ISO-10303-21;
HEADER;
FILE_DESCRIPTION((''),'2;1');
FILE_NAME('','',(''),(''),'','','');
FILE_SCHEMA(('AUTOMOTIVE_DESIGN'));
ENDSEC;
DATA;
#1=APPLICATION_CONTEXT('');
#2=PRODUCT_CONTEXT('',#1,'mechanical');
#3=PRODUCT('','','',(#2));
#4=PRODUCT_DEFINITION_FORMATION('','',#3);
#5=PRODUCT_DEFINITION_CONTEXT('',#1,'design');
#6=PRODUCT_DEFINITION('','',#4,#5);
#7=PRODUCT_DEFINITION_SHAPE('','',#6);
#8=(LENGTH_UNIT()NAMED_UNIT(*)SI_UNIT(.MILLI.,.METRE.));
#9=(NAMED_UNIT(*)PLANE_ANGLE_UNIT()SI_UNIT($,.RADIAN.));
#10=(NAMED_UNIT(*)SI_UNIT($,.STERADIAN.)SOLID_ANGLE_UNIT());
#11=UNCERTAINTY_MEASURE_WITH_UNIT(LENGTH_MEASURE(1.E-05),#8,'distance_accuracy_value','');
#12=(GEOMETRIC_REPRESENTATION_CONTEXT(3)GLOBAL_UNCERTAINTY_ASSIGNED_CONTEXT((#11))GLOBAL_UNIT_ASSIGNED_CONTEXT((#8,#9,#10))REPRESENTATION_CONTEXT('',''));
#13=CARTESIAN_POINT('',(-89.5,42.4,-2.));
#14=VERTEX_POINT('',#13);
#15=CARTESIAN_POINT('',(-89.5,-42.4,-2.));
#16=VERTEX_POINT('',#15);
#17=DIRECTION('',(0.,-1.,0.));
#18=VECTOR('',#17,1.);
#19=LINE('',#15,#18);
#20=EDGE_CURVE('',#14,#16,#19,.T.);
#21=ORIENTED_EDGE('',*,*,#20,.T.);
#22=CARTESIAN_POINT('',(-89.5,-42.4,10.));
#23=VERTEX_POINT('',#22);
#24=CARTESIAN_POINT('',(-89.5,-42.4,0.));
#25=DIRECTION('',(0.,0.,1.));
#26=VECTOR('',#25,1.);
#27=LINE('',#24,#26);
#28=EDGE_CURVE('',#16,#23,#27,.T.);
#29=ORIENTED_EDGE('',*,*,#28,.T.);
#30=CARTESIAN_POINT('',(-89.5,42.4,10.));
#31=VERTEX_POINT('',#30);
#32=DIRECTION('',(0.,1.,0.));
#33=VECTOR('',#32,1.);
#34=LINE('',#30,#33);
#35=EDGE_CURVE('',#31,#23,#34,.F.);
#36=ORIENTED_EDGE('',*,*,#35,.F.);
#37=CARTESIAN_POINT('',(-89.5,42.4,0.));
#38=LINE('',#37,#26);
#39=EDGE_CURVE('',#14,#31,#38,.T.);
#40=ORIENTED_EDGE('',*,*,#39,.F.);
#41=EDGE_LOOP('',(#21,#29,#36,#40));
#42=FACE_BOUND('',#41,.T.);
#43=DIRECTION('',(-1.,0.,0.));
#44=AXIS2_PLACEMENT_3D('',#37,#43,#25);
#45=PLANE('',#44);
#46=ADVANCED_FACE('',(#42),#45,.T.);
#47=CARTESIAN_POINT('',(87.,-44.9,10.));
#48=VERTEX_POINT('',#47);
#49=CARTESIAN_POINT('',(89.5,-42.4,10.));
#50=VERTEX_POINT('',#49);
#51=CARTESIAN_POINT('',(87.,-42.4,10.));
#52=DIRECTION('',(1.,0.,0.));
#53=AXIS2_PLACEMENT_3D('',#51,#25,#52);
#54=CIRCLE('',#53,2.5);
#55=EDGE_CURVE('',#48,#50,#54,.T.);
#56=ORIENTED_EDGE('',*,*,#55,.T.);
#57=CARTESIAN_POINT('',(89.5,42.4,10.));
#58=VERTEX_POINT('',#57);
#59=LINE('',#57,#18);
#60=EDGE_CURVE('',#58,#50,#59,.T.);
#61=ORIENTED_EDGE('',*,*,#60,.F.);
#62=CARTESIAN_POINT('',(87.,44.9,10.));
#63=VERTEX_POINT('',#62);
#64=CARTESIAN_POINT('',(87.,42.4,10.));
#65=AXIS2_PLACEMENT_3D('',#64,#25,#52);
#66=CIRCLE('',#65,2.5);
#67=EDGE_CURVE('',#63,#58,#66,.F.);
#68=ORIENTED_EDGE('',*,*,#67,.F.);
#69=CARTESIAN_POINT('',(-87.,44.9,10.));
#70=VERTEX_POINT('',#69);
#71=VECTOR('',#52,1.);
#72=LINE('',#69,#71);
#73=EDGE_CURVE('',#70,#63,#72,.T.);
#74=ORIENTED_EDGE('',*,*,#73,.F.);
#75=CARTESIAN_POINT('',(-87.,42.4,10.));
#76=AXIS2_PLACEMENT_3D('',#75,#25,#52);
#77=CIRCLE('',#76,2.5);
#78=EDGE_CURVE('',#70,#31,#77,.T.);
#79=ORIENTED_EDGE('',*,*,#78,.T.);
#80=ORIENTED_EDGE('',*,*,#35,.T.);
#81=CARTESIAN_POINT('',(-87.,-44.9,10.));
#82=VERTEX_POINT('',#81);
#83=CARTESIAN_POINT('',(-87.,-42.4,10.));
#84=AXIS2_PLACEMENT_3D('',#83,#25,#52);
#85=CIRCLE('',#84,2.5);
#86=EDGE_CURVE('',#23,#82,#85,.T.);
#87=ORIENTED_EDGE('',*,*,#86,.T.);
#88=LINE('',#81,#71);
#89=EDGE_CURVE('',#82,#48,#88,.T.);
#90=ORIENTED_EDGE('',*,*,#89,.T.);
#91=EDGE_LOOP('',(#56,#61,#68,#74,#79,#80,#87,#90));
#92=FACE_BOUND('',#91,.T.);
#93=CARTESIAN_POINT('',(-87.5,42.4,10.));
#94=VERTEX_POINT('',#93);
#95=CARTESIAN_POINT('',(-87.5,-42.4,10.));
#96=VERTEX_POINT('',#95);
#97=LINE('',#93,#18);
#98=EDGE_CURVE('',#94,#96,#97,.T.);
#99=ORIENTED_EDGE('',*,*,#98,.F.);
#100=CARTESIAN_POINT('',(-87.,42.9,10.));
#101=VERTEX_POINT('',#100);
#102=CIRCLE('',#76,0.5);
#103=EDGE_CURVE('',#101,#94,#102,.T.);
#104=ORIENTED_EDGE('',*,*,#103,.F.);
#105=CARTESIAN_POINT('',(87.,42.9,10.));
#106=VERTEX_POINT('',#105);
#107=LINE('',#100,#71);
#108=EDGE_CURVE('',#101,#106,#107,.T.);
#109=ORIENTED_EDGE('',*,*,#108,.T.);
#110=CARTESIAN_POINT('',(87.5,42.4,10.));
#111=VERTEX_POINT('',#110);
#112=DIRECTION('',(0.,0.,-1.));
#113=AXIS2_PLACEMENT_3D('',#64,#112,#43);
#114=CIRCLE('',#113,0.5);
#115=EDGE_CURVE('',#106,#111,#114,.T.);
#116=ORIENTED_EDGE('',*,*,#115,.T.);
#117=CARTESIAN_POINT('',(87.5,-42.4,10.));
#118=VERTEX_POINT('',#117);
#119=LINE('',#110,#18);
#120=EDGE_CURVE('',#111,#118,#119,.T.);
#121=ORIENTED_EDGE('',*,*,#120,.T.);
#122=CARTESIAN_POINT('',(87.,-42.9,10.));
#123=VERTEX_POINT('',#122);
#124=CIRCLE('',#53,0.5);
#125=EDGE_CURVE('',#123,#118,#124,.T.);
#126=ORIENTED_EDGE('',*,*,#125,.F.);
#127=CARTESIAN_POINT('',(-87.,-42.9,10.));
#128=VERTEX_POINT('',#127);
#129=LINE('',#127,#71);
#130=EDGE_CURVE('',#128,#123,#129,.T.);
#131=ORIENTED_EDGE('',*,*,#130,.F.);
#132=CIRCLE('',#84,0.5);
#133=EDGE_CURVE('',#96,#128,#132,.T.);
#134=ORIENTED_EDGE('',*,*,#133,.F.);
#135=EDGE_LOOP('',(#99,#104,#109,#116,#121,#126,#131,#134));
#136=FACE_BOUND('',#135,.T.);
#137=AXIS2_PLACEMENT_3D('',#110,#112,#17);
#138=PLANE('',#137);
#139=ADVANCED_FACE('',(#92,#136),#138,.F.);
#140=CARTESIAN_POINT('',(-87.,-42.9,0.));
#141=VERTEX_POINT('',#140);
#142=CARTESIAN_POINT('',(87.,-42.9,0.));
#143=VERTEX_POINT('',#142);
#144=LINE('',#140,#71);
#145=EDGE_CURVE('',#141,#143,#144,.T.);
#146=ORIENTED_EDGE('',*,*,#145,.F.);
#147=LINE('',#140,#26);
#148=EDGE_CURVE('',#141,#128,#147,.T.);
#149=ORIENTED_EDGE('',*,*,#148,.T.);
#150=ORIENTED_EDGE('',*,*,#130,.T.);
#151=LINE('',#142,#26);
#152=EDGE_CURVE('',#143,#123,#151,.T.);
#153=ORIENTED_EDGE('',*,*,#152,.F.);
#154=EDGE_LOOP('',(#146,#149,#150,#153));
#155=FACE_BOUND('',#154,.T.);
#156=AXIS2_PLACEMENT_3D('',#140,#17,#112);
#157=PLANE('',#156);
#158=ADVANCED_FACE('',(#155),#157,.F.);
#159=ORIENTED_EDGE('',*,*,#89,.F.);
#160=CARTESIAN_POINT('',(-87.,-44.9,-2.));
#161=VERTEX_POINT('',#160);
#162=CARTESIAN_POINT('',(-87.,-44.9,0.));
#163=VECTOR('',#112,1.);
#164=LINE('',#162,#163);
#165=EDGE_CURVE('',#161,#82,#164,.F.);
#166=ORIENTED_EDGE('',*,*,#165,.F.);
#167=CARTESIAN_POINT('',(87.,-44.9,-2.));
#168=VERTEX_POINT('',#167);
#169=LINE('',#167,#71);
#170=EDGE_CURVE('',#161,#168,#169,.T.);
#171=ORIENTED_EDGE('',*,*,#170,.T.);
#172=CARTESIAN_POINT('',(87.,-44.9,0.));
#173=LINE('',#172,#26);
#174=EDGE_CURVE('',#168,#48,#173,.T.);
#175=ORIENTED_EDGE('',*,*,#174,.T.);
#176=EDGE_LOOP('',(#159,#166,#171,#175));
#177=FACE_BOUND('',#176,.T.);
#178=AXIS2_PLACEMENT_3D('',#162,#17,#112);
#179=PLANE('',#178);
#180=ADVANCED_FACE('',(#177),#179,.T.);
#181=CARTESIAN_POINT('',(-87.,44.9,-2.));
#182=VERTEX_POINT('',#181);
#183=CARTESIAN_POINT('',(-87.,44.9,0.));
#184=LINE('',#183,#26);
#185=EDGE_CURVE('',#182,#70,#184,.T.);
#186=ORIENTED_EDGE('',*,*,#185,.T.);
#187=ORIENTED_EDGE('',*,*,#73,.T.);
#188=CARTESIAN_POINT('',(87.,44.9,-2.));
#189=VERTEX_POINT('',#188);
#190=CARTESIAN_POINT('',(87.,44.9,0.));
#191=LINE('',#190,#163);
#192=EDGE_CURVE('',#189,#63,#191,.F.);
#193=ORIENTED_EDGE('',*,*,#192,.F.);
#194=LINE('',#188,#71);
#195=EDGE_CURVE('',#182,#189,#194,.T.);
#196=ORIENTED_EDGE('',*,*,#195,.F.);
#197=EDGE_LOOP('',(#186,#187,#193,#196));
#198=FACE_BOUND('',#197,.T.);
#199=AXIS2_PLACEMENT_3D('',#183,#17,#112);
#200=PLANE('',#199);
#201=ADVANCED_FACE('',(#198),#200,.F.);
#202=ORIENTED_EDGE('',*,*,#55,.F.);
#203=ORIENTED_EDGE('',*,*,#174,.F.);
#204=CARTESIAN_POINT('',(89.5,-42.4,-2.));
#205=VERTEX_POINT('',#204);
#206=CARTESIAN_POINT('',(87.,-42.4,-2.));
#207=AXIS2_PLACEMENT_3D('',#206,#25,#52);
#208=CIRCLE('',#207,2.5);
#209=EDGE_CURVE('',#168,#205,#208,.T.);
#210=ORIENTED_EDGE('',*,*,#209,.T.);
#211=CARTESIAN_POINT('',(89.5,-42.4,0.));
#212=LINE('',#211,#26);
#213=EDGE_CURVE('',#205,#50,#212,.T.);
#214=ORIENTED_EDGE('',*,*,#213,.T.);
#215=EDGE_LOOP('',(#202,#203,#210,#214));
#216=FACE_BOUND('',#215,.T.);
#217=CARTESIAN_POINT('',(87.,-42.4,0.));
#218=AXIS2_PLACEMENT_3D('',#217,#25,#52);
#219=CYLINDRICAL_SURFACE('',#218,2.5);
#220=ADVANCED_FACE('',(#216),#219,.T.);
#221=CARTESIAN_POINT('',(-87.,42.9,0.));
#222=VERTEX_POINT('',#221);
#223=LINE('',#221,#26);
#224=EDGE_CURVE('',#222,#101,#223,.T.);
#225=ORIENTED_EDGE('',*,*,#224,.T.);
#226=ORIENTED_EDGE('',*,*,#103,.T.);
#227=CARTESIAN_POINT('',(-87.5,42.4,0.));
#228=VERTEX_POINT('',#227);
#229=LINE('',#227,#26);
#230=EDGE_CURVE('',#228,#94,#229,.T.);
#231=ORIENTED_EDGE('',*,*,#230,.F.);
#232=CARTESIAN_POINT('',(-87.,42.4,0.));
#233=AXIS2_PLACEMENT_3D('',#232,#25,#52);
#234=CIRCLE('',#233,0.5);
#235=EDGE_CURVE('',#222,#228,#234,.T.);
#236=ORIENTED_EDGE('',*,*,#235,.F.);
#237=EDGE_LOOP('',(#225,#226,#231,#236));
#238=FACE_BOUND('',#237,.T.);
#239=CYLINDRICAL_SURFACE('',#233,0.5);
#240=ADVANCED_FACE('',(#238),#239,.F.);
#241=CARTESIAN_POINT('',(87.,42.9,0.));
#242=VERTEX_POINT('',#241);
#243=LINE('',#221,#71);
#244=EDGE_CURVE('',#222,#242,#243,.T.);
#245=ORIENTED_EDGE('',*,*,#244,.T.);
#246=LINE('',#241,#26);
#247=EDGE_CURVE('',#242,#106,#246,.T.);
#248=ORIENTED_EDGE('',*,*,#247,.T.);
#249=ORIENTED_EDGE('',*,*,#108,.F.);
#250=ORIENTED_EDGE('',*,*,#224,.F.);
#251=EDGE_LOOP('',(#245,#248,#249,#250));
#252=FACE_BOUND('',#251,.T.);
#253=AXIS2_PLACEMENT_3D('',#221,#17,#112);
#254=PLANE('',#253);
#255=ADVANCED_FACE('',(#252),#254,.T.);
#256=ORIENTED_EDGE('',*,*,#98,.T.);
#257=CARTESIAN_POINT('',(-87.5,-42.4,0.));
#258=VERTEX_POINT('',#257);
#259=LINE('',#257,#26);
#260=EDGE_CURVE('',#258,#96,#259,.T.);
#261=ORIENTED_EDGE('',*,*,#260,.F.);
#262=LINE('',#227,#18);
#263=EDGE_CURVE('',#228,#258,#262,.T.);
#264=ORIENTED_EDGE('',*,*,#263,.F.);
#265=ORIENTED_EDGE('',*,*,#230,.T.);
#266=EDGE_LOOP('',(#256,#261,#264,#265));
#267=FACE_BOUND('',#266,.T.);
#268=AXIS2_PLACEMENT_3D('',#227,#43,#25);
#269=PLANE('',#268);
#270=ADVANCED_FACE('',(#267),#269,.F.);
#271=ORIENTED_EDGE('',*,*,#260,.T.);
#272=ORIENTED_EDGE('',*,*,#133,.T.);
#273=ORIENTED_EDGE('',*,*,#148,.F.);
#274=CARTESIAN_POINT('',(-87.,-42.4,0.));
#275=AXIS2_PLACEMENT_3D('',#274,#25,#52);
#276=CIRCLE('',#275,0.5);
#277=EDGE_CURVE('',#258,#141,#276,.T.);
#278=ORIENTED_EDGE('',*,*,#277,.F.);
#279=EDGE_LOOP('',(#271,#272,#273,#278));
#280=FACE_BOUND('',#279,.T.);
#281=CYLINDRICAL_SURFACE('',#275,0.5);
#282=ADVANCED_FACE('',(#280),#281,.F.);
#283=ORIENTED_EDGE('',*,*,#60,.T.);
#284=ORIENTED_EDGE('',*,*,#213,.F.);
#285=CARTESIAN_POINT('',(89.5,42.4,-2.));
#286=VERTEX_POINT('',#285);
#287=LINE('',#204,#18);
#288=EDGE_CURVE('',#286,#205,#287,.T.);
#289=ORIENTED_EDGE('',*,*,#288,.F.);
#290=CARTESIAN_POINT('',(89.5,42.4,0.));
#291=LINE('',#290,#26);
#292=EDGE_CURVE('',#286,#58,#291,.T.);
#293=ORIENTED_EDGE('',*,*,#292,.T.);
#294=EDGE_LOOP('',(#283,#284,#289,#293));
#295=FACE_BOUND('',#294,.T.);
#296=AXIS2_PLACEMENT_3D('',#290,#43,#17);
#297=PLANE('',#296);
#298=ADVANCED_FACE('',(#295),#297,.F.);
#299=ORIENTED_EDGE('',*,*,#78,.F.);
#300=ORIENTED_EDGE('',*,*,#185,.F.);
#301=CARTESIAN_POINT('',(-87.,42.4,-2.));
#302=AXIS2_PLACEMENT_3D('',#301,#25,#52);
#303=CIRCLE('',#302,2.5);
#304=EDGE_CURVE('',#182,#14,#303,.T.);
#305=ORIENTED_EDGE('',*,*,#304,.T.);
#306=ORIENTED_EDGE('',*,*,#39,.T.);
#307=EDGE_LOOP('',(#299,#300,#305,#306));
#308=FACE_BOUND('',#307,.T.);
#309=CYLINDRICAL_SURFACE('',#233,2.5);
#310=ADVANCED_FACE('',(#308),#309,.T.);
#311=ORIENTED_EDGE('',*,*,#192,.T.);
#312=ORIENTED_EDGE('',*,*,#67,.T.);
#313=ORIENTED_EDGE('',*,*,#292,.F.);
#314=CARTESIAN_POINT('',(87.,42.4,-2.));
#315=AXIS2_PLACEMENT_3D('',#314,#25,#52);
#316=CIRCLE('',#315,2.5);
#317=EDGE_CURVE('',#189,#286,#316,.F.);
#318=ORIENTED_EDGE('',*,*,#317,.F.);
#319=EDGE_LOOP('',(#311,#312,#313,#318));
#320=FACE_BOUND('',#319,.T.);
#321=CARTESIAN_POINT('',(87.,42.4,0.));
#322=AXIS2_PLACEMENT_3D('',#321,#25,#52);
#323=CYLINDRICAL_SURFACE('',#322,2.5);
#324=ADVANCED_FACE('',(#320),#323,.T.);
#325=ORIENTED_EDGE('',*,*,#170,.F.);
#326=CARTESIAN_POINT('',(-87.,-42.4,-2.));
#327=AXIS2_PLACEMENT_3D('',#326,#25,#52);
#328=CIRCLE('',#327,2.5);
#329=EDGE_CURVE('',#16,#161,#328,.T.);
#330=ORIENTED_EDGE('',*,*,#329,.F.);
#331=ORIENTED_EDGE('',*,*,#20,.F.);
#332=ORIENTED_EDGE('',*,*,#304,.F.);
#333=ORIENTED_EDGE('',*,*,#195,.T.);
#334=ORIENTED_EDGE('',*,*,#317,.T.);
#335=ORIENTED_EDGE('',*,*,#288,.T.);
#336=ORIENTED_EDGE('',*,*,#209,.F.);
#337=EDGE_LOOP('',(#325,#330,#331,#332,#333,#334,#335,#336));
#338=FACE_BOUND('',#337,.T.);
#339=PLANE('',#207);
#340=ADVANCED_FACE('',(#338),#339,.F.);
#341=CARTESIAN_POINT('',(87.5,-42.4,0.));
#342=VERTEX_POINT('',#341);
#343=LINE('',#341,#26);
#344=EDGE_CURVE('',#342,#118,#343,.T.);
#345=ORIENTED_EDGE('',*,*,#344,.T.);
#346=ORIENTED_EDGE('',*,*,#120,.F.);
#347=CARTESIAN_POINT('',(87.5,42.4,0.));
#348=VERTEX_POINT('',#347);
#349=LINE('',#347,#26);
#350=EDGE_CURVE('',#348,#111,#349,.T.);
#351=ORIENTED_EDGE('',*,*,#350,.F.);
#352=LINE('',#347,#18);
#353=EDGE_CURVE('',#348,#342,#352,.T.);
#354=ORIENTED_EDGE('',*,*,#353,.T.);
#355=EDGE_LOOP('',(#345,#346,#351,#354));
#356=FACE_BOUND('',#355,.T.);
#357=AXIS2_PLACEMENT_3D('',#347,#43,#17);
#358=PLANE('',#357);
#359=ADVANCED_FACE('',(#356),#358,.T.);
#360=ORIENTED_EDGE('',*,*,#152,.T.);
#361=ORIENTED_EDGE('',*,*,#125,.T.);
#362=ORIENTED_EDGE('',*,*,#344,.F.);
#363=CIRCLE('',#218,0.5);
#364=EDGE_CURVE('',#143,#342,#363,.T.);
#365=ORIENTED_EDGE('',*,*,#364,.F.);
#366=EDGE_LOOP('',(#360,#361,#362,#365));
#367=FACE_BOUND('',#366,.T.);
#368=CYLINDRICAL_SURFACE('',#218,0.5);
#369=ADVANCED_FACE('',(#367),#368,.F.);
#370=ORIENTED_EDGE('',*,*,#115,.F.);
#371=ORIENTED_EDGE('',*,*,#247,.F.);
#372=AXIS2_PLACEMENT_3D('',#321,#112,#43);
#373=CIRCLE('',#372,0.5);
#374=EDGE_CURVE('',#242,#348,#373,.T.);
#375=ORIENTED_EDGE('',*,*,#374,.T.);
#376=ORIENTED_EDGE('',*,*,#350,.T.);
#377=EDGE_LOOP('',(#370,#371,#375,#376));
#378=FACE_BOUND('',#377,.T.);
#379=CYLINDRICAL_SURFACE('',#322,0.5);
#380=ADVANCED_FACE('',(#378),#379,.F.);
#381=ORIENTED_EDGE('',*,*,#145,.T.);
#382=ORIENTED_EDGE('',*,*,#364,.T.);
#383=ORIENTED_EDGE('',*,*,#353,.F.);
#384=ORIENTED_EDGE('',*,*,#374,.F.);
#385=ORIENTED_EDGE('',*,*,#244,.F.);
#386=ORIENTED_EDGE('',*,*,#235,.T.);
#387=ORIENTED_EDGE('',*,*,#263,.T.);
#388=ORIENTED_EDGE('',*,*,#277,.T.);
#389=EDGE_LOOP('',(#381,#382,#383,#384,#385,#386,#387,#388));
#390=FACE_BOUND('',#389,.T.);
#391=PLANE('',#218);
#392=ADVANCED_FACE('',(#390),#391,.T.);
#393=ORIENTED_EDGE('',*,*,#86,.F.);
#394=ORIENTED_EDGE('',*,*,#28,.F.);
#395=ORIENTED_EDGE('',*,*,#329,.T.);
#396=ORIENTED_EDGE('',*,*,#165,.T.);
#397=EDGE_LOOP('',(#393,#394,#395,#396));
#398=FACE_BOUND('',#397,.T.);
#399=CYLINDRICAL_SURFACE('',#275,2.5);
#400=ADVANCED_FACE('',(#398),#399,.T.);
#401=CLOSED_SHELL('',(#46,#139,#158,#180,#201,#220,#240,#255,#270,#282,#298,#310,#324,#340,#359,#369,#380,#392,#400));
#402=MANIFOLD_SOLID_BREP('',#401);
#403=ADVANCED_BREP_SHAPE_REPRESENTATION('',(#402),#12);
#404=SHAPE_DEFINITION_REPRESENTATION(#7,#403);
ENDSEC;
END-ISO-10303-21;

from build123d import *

# Parameters (mm, degrees)
THICKEN1_START   = -2
THICKEN1_DEPTH   = 2
THICKEN1_2_DEPTH = 10


# Read off the part's stored shape, not the designer's step: Thicken1
with BuildPart() as part:
    # Thicken1 outline → Thicken1 (new body)
    with BuildSketch(Plane.XY.offset(THICKEN1_START)):
        with BuildLine():
            Line((-87, -44.9), (87, -44.9))
            ThreePointArc((87, -44.9), (88.767766953, -44.167766953), (89.5, -42.4))
            Line((89.5, -42.4), (89.5, 42.4))
            ThreePointArc((89.5, 42.4), (88.767766953, 44.167766953), (87, 44.9))
            Line((87, 44.9), (-87, 44.9))
            ThreePointArc((-87, 44.9), (-88.767766953, 44.167766953), (-89.5, 42.4))
            Line((-89.5, 42.4), (-89.5, -42.4))
            ThreePointArc((-89.5, -42.4), (-88.767766953, -44.167766953), (-87, -44.9))
        make_face()
    extrude(amount=THICKEN1_DEPTH)

    # Thicken1 2 outline → Thicken1 2 (add)
    with BuildSketch(Plane.XY):
        with BuildLine():
            Line((-87, -44.9), (87, -44.9))
            ThreePointArc((87, -44.9), (88.767766953, -44.167766953), (89.5, -42.4))
            Line((89.5, -42.4), (89.5, 42.4))
            ThreePointArc((89.5, 42.4), (88.767766953, 44.167766953), (87, 44.9))
            Line((87, 44.9), (-87, 44.9))
            ThreePointArc((-87, 44.9), (-88.767766953, 44.167766953), (-89.5, 42.4))
            Line((-89.5, 42.4), (-89.5, -42.4))
            ThreePointArc((-89.5, -42.4), (-88.767766953, -44.167766953), (-87, -44.9))
        make_face()
        with BuildLine():
            ThreePointArc((87.5, -42.4), (87.353553391, -42.753553391), (87, -42.9))
            Line((87, -42.9), (-87, -42.9))
            ThreePointArc((-87, -42.9), (-87.353553391, -42.753553391), (-87.5, -42.4))
            Line((-87.5, -42.4), (-87.5, 42.4))
            ThreePointArc((-87.5, 42.4), (-87.353553391, 42.753553391), (-87, 42.9))
            Line((-87, 42.9), (87, 42.9))
            ThreePointArc((87, 42.9), (87.353553391, 42.753553391), (87.5, 42.4))
            Line((87.5, 42.4), (87.5, -42.4))
        make_face(mode=Mode.SUBTRACT)
    extrude(amount=THICKEN1_2_DEPTH)


solid = part.part
